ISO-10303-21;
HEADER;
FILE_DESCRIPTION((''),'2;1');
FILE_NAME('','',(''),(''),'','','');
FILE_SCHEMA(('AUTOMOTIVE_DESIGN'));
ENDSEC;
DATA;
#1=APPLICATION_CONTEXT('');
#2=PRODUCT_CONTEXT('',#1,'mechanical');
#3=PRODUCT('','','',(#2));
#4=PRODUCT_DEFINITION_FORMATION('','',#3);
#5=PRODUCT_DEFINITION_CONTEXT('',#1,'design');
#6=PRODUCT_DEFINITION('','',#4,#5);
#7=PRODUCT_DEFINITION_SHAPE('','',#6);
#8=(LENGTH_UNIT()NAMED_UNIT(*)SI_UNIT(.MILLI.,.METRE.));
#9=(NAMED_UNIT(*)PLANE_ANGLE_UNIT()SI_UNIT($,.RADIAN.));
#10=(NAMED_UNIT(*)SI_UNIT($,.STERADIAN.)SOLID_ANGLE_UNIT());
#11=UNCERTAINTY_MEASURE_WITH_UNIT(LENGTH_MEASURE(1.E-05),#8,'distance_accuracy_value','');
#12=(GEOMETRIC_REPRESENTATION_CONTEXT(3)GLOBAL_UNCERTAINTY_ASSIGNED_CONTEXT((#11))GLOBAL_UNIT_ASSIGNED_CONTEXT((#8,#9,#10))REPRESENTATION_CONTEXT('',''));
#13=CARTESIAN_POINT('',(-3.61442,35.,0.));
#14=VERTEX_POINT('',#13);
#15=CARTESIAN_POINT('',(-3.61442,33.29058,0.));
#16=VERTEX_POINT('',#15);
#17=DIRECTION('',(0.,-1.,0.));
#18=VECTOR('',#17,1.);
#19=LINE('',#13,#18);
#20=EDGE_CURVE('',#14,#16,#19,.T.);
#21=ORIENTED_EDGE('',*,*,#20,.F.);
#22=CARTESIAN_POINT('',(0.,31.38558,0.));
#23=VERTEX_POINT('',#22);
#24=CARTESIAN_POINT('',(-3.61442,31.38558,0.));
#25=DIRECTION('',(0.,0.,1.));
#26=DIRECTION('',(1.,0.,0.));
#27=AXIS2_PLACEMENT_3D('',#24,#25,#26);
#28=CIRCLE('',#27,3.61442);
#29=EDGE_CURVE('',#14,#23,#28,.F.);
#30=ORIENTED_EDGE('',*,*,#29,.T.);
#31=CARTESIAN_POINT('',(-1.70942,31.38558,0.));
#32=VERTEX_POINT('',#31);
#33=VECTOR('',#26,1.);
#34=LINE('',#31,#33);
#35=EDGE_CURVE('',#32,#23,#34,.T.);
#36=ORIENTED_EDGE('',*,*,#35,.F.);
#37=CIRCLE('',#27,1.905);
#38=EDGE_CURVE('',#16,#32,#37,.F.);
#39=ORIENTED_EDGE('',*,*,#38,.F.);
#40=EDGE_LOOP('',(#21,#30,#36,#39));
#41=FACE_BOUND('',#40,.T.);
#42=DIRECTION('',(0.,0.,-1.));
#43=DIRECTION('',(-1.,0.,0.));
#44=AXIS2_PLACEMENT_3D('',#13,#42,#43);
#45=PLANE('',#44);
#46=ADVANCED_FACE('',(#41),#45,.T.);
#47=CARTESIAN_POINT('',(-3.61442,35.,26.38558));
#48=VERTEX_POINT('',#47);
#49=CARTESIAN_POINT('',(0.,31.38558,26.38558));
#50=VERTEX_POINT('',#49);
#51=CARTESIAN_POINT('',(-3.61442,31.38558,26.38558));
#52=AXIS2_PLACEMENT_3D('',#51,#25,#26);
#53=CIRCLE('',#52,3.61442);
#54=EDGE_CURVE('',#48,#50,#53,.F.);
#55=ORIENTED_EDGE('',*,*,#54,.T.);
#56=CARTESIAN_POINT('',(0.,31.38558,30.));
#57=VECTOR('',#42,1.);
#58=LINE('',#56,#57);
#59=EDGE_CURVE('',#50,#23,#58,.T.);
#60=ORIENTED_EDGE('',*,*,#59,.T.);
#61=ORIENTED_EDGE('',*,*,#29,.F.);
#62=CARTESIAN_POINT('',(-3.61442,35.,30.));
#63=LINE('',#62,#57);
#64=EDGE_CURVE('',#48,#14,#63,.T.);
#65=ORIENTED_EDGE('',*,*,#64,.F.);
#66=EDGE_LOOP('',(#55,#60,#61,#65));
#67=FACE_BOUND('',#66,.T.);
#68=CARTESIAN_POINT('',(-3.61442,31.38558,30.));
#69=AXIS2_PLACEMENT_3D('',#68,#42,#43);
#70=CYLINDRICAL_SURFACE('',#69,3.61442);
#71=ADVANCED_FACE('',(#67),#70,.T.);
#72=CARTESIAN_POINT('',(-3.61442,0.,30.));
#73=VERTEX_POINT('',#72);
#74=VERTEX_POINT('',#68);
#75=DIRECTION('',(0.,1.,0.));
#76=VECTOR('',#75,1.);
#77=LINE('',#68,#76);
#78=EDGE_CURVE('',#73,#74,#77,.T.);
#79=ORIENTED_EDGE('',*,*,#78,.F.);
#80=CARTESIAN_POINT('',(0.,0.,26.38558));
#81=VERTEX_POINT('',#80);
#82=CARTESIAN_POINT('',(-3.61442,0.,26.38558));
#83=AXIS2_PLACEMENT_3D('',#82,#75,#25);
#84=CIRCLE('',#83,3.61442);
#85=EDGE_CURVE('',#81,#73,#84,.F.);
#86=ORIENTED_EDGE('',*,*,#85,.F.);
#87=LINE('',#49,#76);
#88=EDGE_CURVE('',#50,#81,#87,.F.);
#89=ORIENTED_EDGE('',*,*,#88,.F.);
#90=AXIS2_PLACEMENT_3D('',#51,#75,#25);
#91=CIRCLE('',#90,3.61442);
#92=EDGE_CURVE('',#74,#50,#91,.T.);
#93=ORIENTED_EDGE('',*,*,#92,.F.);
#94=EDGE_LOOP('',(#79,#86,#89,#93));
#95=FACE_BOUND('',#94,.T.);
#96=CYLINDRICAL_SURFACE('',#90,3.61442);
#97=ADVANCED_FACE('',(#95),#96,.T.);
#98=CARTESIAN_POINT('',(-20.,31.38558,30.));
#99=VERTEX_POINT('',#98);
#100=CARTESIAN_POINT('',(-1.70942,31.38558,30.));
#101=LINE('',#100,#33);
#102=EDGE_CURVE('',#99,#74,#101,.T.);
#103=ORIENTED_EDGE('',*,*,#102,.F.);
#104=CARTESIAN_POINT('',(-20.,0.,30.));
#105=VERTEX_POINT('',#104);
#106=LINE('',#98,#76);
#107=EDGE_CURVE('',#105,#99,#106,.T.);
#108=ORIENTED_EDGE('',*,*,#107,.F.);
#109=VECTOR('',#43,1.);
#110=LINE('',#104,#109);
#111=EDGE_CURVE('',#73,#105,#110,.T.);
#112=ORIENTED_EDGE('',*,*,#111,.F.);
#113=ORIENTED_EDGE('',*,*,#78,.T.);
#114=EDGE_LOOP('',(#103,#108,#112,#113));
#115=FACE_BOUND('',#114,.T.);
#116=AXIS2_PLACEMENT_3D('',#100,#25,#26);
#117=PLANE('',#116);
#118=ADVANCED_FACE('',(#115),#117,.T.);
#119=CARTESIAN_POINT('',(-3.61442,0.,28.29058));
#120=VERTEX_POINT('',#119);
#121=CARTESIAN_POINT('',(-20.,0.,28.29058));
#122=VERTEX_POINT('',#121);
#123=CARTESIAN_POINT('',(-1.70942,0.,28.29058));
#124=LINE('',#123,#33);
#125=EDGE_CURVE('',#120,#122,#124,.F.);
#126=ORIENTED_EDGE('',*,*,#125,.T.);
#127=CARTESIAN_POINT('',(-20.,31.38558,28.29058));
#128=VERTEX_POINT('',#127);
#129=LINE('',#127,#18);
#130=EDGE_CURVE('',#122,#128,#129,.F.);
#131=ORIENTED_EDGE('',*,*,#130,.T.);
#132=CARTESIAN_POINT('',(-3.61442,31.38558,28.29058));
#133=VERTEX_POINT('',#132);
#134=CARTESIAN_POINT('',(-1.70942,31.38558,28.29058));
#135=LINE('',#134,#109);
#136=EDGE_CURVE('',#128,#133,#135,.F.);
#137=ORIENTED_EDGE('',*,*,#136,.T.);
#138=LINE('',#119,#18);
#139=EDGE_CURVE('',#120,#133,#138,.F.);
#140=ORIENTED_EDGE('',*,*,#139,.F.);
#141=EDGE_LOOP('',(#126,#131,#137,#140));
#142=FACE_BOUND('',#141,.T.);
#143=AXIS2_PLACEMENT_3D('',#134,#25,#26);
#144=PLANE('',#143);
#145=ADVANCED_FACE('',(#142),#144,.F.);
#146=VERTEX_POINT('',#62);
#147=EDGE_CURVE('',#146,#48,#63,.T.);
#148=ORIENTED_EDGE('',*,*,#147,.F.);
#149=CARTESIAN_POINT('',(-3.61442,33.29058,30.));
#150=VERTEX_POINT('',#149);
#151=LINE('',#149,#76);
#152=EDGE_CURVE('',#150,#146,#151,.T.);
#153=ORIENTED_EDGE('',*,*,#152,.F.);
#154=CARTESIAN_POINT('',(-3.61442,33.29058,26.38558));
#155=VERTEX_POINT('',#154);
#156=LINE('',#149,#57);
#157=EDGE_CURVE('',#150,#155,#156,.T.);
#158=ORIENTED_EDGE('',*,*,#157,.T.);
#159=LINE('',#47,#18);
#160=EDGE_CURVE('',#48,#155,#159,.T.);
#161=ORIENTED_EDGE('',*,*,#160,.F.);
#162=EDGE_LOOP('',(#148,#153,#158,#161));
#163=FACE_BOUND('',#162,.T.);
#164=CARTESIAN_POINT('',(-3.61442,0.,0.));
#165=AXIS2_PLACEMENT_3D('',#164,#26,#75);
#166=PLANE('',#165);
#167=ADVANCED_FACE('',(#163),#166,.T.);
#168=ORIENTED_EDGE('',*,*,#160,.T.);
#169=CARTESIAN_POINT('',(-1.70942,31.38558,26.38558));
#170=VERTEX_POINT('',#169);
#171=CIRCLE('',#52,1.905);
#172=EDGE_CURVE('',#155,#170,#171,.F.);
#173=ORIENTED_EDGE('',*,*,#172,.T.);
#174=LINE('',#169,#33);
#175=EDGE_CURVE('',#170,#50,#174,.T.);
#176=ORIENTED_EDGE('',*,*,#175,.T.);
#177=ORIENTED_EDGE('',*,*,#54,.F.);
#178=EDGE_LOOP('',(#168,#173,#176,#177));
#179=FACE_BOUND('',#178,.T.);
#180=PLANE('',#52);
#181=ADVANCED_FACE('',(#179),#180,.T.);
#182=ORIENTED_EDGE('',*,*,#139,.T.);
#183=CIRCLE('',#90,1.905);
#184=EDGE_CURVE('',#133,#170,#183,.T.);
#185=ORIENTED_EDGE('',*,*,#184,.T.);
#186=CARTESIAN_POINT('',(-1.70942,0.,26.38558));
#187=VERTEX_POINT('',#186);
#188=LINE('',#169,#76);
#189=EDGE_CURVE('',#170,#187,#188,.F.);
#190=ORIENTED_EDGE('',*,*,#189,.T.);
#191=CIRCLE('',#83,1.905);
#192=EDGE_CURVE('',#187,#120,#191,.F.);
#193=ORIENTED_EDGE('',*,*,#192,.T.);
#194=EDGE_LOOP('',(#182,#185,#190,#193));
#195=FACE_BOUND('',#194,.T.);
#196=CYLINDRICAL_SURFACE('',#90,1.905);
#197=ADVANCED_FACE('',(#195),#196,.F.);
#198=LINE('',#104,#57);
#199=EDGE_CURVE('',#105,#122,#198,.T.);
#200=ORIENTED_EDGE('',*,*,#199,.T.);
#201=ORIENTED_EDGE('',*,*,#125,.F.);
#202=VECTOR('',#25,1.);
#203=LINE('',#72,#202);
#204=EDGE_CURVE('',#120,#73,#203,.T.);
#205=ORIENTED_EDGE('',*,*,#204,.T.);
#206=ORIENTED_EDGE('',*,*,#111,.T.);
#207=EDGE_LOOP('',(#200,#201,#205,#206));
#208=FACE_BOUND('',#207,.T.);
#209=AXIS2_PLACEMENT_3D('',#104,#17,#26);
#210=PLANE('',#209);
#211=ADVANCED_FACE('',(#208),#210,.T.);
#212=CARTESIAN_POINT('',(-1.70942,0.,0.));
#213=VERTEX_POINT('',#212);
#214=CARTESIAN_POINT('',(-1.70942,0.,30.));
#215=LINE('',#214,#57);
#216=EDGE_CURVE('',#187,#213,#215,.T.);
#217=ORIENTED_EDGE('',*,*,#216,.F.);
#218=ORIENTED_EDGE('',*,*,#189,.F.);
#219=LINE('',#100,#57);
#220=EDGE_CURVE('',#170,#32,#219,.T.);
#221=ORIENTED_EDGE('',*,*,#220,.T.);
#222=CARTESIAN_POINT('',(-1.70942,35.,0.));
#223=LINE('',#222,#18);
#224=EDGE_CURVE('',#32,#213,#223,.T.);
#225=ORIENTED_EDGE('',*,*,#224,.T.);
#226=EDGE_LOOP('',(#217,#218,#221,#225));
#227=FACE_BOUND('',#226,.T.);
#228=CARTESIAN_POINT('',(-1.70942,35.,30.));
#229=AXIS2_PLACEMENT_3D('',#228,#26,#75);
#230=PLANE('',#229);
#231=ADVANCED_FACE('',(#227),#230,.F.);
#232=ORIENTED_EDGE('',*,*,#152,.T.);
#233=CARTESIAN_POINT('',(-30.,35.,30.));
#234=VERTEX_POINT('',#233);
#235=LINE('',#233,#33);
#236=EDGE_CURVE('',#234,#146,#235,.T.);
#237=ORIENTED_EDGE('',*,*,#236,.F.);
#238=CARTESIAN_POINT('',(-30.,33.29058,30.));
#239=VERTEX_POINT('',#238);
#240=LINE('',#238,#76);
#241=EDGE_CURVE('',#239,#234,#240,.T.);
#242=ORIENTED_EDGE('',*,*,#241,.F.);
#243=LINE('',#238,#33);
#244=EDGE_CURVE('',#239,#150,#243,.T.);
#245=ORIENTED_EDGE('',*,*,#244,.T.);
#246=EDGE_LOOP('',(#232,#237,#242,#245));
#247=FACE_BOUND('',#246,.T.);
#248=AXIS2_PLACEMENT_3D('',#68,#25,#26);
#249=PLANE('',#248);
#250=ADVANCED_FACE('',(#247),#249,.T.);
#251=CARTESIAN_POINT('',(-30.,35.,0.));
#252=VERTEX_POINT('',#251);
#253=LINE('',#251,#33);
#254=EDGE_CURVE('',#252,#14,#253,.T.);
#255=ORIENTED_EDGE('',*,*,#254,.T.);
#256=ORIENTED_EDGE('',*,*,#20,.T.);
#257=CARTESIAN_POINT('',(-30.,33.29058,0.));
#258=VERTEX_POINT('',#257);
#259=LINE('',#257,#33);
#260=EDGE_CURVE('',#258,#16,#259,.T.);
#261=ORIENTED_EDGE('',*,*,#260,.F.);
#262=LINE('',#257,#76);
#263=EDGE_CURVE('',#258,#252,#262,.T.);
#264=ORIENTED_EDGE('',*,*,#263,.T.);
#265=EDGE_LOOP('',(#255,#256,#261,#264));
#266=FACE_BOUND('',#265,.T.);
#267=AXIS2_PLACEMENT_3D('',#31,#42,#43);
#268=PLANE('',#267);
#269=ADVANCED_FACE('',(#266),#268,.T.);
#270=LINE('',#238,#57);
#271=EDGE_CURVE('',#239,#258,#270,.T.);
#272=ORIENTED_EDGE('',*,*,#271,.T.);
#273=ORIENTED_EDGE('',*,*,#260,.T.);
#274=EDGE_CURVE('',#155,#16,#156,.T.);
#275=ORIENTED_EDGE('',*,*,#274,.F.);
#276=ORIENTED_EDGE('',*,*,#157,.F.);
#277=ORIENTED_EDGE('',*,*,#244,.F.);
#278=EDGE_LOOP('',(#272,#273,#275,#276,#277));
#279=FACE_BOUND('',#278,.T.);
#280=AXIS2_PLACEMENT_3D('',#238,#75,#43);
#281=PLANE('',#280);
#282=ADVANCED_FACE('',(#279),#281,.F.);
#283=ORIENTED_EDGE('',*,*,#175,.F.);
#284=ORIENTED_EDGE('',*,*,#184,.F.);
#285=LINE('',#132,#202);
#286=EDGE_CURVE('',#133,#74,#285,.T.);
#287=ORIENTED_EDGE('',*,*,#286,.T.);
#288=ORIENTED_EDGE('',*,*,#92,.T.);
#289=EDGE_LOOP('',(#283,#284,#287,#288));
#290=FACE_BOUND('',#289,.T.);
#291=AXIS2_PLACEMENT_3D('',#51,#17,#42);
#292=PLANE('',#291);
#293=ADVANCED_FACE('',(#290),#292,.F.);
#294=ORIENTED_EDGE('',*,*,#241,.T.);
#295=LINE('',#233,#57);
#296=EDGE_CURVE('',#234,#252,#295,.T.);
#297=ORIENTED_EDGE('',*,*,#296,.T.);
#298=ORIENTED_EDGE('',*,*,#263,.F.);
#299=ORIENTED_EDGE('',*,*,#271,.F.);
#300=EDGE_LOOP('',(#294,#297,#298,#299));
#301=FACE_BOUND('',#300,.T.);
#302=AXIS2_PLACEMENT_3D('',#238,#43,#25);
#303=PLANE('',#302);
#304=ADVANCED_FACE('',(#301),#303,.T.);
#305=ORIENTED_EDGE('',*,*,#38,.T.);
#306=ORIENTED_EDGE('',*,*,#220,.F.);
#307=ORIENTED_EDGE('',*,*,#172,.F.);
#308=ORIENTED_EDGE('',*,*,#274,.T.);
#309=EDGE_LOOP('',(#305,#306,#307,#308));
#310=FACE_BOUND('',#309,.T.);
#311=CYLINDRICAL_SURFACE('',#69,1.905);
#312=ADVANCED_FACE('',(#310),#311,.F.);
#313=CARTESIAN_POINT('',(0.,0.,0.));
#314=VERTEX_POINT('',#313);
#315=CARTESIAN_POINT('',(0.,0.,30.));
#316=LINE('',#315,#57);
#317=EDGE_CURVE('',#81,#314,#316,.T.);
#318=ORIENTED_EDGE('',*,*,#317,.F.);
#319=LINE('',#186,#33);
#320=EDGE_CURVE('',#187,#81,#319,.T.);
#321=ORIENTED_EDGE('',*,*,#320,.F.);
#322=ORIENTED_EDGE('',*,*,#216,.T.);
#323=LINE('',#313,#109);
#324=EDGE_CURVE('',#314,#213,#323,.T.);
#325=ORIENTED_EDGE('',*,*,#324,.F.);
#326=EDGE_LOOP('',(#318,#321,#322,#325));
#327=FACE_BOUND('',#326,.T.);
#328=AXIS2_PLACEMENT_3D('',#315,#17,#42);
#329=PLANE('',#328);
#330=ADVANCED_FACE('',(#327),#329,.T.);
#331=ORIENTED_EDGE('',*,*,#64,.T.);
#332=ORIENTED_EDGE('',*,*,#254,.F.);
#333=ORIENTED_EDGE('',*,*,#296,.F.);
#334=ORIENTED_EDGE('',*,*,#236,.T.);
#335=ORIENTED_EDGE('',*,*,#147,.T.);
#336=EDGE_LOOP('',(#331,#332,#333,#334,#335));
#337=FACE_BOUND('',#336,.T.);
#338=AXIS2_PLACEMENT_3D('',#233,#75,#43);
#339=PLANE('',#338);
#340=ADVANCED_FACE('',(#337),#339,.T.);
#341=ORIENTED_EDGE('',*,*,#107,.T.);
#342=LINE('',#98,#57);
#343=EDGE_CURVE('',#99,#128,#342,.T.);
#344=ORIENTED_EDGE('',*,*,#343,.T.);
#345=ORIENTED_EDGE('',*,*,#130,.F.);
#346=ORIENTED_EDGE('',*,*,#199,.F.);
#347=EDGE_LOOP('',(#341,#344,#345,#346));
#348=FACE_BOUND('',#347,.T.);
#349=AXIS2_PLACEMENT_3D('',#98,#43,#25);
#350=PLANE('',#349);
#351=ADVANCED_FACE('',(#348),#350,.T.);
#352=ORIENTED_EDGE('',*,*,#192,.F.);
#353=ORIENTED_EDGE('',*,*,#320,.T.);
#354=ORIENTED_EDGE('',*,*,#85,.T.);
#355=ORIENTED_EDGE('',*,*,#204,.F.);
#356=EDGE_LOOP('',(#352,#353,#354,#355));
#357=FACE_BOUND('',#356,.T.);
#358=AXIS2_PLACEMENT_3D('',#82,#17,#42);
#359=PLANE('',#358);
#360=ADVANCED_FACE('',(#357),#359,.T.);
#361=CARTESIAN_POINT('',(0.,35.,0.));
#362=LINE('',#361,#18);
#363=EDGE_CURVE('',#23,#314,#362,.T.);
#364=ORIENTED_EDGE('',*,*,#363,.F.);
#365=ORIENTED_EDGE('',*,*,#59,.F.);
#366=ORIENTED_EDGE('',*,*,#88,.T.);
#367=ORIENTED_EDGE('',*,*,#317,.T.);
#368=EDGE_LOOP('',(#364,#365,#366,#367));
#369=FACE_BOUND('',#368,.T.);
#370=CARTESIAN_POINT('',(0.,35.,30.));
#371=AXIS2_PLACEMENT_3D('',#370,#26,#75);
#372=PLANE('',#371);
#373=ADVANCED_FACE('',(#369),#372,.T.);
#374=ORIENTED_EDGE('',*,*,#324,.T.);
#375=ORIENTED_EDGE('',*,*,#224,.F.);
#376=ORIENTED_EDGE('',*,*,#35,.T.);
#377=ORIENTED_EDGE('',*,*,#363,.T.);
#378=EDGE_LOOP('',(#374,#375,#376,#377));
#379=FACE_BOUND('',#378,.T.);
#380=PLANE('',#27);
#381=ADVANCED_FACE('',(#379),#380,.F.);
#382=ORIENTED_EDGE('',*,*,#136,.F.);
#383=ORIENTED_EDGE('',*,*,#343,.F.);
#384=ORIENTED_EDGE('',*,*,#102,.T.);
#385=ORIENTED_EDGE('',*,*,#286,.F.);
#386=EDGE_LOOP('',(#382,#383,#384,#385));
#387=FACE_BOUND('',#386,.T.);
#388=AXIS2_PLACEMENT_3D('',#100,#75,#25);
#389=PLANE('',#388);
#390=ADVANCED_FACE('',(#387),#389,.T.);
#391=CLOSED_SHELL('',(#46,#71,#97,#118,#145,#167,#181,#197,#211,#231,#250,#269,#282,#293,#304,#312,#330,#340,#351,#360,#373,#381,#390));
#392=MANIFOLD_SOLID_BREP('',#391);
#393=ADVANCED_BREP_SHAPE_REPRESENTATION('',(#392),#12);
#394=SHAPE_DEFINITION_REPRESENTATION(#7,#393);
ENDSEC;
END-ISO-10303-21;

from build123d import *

# Parameters (mm, degrees)
BASE_FLANGE1_DEPTH   = 30
EDGE_FLANGE1_DEPTH   = 35
EDGE_FLANGE1_START   = 31.38558
EDGE_FLANGE1_2_DEPTH = 3.61442
EDGE_FLANGE1_3_DEPTH = 31.38558


# Read off the part's stored shape, not the designer's step: Edge-Flange1
# Sheet-metal steps are written as plain solids
with BuildPart() as part:
    # Sketch1 → Base-Flange1 (new body)
    with BuildSketch(Plane.XY):
        with BuildLine():
            Line((-30, 35), (-3.61442, 35))
            ThreePointArc((-3.61442, 35), (-1.058639108, 33.941360892), (0, 31.38558))
            Line((0, 31.38558), (0, 0))
            Line((0, 0), (-1.70942, 0))
            Line((-1.70942, 0), (-1.70942, 31.38558))
            ThreePointArc((-1.70942, 31.38558), (-2.267381582, 32.732618418), (-3.61442, 33.29058))
            Line((-3.61442, 33.29058), (-30, 33.29058))
            Line((-30, 33.29058), (-30, 35))
        make_face()
    extrude(amount=BASE_FLANGE1_DEPTH)

    # Edge-Flange1 outline → Edge-Flange1 (cut)
    with BuildSketch(Plane(origin=(0, 0, 0), x_dir=(1, 0, 0), z_dir=(0, 1, 0))):
        with BuildLine():
            Line((-3.61442, -30), (0, -30))
            Line((0, -30), (0, -26.38558))
            ThreePointArc((0, -26.38558), (-1.058639108, -28.941360892), (-3.61442, -30))
        make_face()
        with BuildLine():
            Line((-3.61442, -26.38558), (-3.61442, -28.29058))
            ThreePointArc((-3.61442, -28.29058), (-2.267381582, -27.732618418), (-1.70942, -26.38558))
            Line((-1.70942, -26.38558), (-3.61442, -26.38558))
        make_face()
    extrude(amount=EDGE_FLANGE1_DEPTH, mode=Mode.SUBTRACT)

    # Edge-Flange1 2 outline → Edge-Flange1 2 (cut)
    with BuildSketch(Plane(origin=(0, 0, 0), x_dir=(1, 0, 0), z_dir=(0, 1, 0)).offset(EDGE_FLANGE1_START)):
        with BuildLine():
            Line((-3.61442, -28.29058), (-3.61442, -30))
            ThreePointArc((-3.61442, -30), (-1.058639108, -28.941360892), (0, -26.38558))
            Line((0, -26.38558), (-1.70942, -26.38558))
            ThreePointArc((-1.70942, -26.38558), (-2.267381582, -27.732618418), (-3.61442, -28.29058))
        make_face()
    extrude(amount=EDGE_FLANGE1_2_DEPTH, mode=Mode.SUBTRACT)

    # Edge-Flange1 3 outline → Edge-Flange1 3 (add)
    with BuildSketch(Plane(origin=(0, 0, 0), x_dir=(1, 0, 0), z_dir=(0, 1, 0))):
        with BuildLine():
            Line((-20, -30), (-3.61442, -30))
            ThreePointArc((-3.61442, -30), (-2.624012381, -29.861658924), (-1.70942, -29.45722564))
            Line((-1.70942, -29.45722564), (-1.70942, -26.38558))
            ThreePointArc((-1.70942, -26.38558), (-2.267381582, -27.732618418), (-3.61442, -28.29058))
            Line((-3.61442, -28.29058), (-20, -28.29058))
            Line((-20, -28.29058), (-20, -30))
        make_face()
    extrude(amount=EDGE_FLANGE1_3_DEPTH)


solid = part.part
